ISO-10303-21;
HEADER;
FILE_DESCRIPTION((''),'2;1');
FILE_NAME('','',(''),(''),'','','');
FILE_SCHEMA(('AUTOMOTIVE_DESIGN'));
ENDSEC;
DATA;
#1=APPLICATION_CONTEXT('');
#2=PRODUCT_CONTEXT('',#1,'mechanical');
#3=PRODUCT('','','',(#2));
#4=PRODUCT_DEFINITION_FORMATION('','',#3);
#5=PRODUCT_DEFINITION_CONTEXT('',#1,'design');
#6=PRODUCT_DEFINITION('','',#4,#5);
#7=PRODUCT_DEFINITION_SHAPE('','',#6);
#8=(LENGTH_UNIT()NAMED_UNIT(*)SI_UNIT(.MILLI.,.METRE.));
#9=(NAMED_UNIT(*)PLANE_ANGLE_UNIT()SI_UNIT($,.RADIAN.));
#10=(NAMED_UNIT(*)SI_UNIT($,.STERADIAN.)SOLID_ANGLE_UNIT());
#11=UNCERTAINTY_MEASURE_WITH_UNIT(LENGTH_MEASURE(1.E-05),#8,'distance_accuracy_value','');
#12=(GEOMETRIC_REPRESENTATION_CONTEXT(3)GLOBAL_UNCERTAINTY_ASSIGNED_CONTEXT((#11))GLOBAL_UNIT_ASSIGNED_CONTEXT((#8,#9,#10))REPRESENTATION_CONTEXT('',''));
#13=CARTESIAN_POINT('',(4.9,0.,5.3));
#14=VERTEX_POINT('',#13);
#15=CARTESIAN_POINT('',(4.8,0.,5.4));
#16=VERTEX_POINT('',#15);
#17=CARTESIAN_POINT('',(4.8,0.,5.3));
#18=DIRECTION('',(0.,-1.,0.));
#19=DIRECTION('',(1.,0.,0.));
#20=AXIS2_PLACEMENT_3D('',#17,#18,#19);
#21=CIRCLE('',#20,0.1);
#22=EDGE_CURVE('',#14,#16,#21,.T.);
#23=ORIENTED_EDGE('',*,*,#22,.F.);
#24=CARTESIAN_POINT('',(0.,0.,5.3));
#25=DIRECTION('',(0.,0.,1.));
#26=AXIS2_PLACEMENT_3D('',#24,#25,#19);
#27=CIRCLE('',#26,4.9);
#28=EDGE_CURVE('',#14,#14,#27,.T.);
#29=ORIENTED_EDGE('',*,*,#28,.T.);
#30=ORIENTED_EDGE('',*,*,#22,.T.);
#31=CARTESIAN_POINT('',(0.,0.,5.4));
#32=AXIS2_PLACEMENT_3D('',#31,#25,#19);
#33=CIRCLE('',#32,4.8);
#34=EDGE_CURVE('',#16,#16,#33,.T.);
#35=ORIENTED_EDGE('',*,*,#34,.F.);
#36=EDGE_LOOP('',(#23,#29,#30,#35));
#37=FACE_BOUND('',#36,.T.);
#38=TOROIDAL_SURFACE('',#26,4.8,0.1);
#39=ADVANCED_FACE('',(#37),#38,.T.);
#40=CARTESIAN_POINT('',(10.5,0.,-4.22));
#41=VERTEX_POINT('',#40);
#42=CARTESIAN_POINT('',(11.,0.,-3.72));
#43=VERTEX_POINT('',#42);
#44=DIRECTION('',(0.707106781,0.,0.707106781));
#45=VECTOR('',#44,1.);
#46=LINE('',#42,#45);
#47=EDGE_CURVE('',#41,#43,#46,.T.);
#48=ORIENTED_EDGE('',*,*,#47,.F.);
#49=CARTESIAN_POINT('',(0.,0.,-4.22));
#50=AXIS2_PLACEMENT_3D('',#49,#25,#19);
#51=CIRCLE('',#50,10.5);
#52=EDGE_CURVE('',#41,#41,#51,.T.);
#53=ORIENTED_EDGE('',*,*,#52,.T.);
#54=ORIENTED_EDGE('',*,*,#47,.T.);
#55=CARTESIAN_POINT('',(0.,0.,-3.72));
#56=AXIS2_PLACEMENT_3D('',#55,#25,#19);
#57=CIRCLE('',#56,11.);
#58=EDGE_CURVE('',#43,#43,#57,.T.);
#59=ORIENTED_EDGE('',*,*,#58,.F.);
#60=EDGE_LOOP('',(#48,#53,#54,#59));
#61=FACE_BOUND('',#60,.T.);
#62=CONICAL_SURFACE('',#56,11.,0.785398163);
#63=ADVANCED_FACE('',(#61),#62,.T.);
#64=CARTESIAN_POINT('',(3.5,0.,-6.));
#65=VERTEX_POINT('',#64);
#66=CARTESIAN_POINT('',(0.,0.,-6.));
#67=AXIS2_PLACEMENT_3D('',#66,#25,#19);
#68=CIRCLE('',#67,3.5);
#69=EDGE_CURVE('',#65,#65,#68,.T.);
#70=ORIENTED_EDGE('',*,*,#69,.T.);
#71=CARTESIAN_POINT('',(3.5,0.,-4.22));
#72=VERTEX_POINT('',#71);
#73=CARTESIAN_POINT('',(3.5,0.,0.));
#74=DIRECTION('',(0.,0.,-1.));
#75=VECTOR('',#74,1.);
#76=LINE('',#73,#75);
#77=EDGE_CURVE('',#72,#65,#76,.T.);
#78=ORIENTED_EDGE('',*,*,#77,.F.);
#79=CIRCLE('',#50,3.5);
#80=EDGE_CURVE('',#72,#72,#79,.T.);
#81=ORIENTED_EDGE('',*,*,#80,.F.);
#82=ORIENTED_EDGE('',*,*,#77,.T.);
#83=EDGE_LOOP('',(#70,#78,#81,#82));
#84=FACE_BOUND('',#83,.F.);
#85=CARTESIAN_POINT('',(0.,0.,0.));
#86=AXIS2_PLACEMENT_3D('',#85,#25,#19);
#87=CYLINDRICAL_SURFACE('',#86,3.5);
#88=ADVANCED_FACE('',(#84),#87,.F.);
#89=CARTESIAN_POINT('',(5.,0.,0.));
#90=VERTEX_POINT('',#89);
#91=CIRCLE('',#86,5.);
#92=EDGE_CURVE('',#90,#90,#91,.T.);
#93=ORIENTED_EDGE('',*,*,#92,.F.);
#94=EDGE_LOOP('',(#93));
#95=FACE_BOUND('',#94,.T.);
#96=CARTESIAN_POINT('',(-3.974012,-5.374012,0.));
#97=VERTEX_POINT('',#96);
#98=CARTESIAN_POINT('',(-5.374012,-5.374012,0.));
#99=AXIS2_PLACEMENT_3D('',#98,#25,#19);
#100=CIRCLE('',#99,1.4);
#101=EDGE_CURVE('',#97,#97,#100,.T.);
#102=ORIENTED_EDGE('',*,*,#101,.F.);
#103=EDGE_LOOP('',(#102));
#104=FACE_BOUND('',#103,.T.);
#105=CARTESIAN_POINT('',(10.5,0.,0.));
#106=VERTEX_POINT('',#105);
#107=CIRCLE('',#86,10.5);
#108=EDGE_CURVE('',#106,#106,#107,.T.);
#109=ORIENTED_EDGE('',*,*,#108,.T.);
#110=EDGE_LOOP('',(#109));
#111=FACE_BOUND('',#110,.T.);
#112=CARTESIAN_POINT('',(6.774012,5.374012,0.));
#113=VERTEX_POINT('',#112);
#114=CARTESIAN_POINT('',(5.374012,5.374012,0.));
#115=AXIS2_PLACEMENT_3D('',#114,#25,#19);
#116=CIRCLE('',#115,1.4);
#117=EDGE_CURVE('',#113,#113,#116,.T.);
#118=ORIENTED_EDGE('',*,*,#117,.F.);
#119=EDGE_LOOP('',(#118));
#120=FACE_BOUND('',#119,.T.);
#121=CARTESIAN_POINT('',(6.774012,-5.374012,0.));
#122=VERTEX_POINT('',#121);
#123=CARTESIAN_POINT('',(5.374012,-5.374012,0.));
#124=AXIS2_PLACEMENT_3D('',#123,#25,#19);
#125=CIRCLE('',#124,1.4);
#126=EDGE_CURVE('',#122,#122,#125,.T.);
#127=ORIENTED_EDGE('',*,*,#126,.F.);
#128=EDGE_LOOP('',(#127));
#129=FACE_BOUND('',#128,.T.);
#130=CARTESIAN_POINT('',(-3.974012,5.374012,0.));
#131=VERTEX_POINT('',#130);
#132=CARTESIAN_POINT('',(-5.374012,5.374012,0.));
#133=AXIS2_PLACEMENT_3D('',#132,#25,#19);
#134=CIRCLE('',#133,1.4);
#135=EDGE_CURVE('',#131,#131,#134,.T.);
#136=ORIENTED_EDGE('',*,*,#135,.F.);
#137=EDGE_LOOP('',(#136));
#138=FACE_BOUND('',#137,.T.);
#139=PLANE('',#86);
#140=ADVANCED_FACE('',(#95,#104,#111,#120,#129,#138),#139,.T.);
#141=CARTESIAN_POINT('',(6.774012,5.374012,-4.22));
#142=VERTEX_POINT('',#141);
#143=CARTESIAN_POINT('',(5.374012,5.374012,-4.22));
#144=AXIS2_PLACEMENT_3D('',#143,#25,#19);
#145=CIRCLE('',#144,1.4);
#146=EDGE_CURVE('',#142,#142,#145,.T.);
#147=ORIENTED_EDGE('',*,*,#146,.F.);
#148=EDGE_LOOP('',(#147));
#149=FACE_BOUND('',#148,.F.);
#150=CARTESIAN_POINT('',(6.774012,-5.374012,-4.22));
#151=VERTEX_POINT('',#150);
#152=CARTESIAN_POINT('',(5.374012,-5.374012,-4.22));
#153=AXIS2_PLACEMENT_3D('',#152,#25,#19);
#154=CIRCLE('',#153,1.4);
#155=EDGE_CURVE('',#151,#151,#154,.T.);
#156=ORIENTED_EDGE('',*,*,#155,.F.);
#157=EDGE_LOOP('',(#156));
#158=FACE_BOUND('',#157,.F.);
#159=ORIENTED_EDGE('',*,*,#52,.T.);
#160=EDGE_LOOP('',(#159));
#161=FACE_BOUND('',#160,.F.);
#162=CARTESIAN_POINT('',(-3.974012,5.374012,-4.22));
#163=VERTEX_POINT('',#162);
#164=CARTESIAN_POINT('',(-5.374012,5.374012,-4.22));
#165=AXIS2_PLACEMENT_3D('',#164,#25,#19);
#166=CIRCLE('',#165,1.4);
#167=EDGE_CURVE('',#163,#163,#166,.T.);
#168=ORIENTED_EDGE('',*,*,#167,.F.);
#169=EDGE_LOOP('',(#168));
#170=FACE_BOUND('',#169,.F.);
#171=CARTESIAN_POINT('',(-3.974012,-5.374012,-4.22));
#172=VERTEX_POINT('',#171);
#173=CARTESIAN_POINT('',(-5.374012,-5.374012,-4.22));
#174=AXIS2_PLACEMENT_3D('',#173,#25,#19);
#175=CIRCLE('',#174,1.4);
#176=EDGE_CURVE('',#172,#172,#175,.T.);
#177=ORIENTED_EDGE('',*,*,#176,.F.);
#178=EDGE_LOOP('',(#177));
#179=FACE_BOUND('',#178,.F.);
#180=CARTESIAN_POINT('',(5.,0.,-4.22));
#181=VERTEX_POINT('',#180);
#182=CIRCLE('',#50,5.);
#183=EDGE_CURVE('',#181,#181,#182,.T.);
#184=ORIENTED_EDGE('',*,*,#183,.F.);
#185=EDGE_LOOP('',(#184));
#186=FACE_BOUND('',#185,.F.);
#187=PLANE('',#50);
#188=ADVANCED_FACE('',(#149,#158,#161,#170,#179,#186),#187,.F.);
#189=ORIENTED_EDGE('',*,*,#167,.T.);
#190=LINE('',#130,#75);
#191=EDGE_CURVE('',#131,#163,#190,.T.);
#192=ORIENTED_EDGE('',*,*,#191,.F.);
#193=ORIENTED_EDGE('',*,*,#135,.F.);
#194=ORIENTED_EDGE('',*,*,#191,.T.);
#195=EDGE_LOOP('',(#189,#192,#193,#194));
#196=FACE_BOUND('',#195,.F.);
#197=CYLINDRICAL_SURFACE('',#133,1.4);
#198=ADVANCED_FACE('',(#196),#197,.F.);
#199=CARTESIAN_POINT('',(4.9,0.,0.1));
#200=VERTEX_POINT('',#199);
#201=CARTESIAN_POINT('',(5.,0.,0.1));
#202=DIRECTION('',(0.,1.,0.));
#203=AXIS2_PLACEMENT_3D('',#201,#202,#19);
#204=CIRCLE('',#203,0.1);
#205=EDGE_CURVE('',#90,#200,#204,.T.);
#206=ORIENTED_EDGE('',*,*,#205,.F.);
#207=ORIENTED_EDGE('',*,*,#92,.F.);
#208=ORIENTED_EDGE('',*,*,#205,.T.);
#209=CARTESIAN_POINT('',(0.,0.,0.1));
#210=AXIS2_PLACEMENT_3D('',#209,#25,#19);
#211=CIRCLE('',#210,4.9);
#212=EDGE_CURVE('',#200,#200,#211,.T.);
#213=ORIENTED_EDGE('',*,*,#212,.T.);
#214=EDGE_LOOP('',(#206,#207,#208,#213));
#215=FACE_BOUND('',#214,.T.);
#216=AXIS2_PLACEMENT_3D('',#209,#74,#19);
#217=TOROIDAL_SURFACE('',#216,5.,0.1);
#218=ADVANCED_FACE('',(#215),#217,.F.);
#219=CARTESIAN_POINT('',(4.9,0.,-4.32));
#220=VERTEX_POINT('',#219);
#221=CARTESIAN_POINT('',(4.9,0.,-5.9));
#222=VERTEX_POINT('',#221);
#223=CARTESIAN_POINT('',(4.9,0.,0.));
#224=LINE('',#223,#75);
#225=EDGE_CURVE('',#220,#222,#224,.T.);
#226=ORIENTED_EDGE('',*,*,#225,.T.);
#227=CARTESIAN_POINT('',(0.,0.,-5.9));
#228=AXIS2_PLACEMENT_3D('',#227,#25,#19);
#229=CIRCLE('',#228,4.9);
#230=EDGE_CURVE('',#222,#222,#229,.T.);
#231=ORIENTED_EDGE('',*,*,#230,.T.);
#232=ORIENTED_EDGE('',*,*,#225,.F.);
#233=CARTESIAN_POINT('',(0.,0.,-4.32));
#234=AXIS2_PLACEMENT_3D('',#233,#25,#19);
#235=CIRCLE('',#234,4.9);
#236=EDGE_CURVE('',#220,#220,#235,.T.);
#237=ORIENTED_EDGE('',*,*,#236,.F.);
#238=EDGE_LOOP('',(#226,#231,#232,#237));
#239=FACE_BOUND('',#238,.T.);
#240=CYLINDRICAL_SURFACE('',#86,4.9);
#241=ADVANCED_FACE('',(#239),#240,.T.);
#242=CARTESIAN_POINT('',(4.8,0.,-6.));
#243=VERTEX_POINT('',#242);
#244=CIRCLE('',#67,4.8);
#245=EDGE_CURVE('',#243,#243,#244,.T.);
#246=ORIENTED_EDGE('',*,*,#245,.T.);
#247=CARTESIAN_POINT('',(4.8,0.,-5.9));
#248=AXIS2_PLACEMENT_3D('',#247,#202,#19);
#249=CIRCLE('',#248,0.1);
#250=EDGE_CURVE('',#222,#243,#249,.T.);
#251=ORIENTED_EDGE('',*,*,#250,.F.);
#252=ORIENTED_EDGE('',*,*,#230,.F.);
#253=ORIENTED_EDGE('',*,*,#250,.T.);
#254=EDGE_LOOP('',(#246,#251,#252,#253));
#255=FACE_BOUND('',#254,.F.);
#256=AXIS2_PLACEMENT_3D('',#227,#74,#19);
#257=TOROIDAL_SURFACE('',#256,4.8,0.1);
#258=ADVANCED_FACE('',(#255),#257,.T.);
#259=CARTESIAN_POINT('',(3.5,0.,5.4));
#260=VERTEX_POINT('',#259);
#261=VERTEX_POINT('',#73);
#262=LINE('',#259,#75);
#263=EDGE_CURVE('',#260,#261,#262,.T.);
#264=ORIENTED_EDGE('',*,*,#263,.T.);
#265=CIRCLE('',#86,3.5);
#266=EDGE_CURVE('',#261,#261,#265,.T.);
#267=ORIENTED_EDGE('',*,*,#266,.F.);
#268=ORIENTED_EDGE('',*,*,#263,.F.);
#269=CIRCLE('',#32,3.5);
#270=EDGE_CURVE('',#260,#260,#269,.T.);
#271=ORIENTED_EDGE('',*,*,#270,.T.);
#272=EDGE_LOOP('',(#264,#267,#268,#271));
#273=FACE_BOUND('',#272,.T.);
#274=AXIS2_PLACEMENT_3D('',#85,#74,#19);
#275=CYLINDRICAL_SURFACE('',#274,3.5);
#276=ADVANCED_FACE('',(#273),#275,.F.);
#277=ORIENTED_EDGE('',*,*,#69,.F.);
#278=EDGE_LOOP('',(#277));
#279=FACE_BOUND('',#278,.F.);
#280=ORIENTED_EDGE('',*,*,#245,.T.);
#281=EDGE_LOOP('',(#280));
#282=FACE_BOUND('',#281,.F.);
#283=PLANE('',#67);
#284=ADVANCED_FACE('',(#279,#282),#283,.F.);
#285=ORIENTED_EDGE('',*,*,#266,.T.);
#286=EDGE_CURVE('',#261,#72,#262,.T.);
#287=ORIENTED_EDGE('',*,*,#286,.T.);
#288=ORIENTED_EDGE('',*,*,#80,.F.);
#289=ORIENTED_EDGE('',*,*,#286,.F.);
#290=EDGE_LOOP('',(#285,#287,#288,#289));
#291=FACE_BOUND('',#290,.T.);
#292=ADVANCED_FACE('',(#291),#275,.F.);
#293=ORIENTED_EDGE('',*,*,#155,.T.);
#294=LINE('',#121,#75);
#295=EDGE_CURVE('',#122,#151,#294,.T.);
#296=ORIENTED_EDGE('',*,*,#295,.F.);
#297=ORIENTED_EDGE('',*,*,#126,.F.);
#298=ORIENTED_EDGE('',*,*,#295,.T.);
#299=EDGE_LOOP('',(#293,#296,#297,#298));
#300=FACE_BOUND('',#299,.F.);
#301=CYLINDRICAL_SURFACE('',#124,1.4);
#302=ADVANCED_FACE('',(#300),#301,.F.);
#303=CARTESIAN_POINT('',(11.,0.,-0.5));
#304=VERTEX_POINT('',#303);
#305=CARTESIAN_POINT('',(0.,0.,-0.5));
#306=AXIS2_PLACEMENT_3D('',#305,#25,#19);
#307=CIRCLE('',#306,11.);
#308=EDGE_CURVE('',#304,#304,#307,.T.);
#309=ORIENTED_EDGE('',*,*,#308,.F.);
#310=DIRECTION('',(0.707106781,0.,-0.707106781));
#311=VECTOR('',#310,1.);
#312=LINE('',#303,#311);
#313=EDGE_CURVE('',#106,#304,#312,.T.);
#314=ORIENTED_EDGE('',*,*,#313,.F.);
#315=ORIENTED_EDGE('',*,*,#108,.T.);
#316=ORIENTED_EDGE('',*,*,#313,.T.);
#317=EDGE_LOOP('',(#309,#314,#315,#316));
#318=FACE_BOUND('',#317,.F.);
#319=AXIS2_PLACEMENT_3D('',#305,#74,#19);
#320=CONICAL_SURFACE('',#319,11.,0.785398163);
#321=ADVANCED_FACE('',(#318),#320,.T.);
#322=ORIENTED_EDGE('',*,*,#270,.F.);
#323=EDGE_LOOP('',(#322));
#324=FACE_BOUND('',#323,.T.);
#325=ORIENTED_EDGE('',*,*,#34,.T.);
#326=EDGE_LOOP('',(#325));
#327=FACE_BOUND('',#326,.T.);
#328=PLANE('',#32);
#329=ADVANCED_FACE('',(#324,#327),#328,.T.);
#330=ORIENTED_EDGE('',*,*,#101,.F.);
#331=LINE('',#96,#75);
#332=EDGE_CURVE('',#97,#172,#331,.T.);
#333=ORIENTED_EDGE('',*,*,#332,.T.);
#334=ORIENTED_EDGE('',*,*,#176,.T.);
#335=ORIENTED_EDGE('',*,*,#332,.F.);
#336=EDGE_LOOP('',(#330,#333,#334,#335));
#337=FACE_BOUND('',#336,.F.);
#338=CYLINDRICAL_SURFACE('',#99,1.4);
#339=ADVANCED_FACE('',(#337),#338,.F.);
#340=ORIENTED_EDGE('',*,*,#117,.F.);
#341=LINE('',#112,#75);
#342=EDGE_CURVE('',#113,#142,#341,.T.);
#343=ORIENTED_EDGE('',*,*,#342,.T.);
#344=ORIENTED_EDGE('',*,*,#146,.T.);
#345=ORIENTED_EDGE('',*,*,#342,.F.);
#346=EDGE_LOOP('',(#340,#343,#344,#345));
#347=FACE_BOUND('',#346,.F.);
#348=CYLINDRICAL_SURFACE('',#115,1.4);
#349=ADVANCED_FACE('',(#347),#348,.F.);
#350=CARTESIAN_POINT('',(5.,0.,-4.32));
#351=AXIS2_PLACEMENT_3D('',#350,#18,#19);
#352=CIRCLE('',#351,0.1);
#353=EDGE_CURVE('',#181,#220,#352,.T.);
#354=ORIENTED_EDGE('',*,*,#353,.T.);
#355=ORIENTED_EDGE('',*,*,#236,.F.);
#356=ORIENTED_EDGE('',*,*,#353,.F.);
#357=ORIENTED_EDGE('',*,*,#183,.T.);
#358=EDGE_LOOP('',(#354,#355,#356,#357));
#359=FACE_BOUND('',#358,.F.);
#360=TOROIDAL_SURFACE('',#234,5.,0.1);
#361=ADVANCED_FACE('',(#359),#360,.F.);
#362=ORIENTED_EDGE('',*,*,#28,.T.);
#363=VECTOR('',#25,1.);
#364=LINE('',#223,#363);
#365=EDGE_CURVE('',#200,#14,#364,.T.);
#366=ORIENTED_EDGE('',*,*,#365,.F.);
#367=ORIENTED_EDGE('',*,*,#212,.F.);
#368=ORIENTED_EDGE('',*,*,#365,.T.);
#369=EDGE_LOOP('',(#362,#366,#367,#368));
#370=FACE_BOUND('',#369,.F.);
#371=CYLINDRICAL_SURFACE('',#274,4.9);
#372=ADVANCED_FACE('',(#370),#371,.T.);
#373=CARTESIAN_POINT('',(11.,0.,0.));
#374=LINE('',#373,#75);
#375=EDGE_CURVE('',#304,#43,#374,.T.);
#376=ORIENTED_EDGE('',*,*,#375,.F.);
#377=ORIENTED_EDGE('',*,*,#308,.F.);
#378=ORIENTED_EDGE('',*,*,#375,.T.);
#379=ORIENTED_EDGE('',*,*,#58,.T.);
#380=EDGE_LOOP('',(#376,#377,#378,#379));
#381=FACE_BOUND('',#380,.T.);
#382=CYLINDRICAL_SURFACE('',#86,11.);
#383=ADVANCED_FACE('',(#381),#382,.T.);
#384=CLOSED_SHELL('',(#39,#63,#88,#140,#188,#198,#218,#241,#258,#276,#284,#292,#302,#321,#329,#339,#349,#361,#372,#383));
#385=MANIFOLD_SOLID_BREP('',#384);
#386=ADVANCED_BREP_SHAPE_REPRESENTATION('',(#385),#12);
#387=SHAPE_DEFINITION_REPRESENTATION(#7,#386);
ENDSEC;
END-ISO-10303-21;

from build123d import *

# Parameters (mm, degrees)
F0_R          = 11
F0_R_2        = 1.4
F0_R_3        = 4.9
F0_R_4        = 3.5
F1_DEPTH      = 4.22
F2_DEPTH      = 5.4
F2_DEPTH_BACK = 6
F3_SIZE       = 0.5
F4_R          = 0.1


with BuildPart() as f1:
    # F0 (on Top) → F1 (new body)
    with BuildSketch(Plane.XY):
        Circle(F0_R)
        with Locations((-5.374011537, -5.374011537)):
            Circle(F0_R_2, mode=Mode.SUBTRACT)
        with Locations((5.374011537, -5.374011537)):
            Circle(F0_R_2, mode=Mode.SUBTRACT)
        with Locations((-5.374011537, 5.374011537)):
            Circle(F0_R_2, mode=Mode.SUBTRACT)
        Circle(F0_R_3, mode=Mode.SUBTRACT)
        with Locations((5.374011537, 5.374011537)):
            Circle(F0_R_2, mode=Mode.SUBTRACT)
        Circle(F0_R_3)
        Circle(F0_R_4, mode=Mode.SUBTRACT)
    extrude(amount=-F1_DEPTH)

    # F0 (on Top) → F2 (join, two sides)
    with BuildSketch(Plane.XY) as f2_sk:
        Circle(F0_R_3)
        Circle(F0_R_4, mode=Mode.SUBTRACT)
    extrude(amount=F2_DEPTH)
    extrude(f2_sk.sketch, amount=-F2_DEPTH_BACK)

    # F3
    f3_edges = [f1.edges().sort_by_distance(p)[0] for p in [
        (-11, 0, 0),
        (-11, 0, -4.22),
    ]]
    chamfer(f3_edges, length=F3_SIZE)

    # F4
    f4_edges = [f1.edges().sort_by_distance(p)[0] for p in [
        (-4.9, 0, 5.4),
        (-4.9, 0, 0),
        (-4.9, 0, -4.22),
        (-4.9, 0, -6),
    ]]
    fillet(f4_edges, radius=F4_R)


solid = f1.part
